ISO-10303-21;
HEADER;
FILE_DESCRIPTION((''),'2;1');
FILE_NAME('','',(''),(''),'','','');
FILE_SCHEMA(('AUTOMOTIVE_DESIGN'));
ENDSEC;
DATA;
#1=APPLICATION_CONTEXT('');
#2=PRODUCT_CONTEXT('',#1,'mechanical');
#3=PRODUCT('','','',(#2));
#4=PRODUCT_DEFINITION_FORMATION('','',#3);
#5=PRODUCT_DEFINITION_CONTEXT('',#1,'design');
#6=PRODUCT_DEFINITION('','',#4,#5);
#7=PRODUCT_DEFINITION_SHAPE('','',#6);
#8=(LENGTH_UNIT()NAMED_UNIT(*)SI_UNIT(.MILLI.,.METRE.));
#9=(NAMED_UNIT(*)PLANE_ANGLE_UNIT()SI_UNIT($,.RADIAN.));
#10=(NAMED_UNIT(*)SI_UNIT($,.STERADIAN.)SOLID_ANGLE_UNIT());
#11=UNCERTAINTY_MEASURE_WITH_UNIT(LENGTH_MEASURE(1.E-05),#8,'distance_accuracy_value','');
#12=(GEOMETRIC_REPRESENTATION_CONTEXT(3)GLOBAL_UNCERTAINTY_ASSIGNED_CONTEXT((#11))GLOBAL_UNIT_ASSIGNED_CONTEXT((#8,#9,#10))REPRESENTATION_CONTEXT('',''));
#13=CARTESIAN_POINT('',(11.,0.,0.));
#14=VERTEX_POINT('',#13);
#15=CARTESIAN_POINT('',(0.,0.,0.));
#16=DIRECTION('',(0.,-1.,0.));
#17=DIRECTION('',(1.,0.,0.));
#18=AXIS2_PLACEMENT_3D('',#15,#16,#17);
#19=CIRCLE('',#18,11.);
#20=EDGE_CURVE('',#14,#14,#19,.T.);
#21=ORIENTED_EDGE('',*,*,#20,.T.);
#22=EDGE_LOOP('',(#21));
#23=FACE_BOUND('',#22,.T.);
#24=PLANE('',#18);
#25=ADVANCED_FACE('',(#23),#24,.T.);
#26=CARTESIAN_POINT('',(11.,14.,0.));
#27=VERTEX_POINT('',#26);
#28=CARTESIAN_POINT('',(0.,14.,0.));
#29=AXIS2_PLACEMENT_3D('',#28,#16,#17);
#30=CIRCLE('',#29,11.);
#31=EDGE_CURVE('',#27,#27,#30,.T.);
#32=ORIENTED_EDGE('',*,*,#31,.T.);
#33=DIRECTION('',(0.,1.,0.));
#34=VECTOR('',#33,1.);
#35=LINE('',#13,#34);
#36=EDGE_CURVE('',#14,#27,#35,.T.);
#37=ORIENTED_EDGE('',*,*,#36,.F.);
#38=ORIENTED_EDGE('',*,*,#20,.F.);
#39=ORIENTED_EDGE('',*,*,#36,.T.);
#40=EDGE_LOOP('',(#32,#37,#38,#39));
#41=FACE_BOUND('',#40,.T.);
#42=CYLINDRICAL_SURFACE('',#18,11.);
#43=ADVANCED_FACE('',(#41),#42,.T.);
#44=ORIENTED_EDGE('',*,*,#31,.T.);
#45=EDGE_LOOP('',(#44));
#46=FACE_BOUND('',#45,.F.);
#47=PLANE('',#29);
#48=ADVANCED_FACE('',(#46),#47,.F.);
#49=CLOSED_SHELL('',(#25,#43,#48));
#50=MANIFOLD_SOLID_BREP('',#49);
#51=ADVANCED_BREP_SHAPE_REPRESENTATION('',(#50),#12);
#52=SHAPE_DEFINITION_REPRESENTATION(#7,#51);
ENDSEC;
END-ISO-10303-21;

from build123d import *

# Parameters (mm, degrees)
F0_R     = 11
F1_DEPTH = 14


# Not quite as in the source:
# - a feature names something its author has since deleted; it is built from what else it names


with BuildPart() as f1:
    # F0 (on Front) → F1 (new body)
    with BuildSketch(Plane.XZ):
        Circle(F0_R)
    extrude(amount=-F1_DEPTH)


solid = f1.part
